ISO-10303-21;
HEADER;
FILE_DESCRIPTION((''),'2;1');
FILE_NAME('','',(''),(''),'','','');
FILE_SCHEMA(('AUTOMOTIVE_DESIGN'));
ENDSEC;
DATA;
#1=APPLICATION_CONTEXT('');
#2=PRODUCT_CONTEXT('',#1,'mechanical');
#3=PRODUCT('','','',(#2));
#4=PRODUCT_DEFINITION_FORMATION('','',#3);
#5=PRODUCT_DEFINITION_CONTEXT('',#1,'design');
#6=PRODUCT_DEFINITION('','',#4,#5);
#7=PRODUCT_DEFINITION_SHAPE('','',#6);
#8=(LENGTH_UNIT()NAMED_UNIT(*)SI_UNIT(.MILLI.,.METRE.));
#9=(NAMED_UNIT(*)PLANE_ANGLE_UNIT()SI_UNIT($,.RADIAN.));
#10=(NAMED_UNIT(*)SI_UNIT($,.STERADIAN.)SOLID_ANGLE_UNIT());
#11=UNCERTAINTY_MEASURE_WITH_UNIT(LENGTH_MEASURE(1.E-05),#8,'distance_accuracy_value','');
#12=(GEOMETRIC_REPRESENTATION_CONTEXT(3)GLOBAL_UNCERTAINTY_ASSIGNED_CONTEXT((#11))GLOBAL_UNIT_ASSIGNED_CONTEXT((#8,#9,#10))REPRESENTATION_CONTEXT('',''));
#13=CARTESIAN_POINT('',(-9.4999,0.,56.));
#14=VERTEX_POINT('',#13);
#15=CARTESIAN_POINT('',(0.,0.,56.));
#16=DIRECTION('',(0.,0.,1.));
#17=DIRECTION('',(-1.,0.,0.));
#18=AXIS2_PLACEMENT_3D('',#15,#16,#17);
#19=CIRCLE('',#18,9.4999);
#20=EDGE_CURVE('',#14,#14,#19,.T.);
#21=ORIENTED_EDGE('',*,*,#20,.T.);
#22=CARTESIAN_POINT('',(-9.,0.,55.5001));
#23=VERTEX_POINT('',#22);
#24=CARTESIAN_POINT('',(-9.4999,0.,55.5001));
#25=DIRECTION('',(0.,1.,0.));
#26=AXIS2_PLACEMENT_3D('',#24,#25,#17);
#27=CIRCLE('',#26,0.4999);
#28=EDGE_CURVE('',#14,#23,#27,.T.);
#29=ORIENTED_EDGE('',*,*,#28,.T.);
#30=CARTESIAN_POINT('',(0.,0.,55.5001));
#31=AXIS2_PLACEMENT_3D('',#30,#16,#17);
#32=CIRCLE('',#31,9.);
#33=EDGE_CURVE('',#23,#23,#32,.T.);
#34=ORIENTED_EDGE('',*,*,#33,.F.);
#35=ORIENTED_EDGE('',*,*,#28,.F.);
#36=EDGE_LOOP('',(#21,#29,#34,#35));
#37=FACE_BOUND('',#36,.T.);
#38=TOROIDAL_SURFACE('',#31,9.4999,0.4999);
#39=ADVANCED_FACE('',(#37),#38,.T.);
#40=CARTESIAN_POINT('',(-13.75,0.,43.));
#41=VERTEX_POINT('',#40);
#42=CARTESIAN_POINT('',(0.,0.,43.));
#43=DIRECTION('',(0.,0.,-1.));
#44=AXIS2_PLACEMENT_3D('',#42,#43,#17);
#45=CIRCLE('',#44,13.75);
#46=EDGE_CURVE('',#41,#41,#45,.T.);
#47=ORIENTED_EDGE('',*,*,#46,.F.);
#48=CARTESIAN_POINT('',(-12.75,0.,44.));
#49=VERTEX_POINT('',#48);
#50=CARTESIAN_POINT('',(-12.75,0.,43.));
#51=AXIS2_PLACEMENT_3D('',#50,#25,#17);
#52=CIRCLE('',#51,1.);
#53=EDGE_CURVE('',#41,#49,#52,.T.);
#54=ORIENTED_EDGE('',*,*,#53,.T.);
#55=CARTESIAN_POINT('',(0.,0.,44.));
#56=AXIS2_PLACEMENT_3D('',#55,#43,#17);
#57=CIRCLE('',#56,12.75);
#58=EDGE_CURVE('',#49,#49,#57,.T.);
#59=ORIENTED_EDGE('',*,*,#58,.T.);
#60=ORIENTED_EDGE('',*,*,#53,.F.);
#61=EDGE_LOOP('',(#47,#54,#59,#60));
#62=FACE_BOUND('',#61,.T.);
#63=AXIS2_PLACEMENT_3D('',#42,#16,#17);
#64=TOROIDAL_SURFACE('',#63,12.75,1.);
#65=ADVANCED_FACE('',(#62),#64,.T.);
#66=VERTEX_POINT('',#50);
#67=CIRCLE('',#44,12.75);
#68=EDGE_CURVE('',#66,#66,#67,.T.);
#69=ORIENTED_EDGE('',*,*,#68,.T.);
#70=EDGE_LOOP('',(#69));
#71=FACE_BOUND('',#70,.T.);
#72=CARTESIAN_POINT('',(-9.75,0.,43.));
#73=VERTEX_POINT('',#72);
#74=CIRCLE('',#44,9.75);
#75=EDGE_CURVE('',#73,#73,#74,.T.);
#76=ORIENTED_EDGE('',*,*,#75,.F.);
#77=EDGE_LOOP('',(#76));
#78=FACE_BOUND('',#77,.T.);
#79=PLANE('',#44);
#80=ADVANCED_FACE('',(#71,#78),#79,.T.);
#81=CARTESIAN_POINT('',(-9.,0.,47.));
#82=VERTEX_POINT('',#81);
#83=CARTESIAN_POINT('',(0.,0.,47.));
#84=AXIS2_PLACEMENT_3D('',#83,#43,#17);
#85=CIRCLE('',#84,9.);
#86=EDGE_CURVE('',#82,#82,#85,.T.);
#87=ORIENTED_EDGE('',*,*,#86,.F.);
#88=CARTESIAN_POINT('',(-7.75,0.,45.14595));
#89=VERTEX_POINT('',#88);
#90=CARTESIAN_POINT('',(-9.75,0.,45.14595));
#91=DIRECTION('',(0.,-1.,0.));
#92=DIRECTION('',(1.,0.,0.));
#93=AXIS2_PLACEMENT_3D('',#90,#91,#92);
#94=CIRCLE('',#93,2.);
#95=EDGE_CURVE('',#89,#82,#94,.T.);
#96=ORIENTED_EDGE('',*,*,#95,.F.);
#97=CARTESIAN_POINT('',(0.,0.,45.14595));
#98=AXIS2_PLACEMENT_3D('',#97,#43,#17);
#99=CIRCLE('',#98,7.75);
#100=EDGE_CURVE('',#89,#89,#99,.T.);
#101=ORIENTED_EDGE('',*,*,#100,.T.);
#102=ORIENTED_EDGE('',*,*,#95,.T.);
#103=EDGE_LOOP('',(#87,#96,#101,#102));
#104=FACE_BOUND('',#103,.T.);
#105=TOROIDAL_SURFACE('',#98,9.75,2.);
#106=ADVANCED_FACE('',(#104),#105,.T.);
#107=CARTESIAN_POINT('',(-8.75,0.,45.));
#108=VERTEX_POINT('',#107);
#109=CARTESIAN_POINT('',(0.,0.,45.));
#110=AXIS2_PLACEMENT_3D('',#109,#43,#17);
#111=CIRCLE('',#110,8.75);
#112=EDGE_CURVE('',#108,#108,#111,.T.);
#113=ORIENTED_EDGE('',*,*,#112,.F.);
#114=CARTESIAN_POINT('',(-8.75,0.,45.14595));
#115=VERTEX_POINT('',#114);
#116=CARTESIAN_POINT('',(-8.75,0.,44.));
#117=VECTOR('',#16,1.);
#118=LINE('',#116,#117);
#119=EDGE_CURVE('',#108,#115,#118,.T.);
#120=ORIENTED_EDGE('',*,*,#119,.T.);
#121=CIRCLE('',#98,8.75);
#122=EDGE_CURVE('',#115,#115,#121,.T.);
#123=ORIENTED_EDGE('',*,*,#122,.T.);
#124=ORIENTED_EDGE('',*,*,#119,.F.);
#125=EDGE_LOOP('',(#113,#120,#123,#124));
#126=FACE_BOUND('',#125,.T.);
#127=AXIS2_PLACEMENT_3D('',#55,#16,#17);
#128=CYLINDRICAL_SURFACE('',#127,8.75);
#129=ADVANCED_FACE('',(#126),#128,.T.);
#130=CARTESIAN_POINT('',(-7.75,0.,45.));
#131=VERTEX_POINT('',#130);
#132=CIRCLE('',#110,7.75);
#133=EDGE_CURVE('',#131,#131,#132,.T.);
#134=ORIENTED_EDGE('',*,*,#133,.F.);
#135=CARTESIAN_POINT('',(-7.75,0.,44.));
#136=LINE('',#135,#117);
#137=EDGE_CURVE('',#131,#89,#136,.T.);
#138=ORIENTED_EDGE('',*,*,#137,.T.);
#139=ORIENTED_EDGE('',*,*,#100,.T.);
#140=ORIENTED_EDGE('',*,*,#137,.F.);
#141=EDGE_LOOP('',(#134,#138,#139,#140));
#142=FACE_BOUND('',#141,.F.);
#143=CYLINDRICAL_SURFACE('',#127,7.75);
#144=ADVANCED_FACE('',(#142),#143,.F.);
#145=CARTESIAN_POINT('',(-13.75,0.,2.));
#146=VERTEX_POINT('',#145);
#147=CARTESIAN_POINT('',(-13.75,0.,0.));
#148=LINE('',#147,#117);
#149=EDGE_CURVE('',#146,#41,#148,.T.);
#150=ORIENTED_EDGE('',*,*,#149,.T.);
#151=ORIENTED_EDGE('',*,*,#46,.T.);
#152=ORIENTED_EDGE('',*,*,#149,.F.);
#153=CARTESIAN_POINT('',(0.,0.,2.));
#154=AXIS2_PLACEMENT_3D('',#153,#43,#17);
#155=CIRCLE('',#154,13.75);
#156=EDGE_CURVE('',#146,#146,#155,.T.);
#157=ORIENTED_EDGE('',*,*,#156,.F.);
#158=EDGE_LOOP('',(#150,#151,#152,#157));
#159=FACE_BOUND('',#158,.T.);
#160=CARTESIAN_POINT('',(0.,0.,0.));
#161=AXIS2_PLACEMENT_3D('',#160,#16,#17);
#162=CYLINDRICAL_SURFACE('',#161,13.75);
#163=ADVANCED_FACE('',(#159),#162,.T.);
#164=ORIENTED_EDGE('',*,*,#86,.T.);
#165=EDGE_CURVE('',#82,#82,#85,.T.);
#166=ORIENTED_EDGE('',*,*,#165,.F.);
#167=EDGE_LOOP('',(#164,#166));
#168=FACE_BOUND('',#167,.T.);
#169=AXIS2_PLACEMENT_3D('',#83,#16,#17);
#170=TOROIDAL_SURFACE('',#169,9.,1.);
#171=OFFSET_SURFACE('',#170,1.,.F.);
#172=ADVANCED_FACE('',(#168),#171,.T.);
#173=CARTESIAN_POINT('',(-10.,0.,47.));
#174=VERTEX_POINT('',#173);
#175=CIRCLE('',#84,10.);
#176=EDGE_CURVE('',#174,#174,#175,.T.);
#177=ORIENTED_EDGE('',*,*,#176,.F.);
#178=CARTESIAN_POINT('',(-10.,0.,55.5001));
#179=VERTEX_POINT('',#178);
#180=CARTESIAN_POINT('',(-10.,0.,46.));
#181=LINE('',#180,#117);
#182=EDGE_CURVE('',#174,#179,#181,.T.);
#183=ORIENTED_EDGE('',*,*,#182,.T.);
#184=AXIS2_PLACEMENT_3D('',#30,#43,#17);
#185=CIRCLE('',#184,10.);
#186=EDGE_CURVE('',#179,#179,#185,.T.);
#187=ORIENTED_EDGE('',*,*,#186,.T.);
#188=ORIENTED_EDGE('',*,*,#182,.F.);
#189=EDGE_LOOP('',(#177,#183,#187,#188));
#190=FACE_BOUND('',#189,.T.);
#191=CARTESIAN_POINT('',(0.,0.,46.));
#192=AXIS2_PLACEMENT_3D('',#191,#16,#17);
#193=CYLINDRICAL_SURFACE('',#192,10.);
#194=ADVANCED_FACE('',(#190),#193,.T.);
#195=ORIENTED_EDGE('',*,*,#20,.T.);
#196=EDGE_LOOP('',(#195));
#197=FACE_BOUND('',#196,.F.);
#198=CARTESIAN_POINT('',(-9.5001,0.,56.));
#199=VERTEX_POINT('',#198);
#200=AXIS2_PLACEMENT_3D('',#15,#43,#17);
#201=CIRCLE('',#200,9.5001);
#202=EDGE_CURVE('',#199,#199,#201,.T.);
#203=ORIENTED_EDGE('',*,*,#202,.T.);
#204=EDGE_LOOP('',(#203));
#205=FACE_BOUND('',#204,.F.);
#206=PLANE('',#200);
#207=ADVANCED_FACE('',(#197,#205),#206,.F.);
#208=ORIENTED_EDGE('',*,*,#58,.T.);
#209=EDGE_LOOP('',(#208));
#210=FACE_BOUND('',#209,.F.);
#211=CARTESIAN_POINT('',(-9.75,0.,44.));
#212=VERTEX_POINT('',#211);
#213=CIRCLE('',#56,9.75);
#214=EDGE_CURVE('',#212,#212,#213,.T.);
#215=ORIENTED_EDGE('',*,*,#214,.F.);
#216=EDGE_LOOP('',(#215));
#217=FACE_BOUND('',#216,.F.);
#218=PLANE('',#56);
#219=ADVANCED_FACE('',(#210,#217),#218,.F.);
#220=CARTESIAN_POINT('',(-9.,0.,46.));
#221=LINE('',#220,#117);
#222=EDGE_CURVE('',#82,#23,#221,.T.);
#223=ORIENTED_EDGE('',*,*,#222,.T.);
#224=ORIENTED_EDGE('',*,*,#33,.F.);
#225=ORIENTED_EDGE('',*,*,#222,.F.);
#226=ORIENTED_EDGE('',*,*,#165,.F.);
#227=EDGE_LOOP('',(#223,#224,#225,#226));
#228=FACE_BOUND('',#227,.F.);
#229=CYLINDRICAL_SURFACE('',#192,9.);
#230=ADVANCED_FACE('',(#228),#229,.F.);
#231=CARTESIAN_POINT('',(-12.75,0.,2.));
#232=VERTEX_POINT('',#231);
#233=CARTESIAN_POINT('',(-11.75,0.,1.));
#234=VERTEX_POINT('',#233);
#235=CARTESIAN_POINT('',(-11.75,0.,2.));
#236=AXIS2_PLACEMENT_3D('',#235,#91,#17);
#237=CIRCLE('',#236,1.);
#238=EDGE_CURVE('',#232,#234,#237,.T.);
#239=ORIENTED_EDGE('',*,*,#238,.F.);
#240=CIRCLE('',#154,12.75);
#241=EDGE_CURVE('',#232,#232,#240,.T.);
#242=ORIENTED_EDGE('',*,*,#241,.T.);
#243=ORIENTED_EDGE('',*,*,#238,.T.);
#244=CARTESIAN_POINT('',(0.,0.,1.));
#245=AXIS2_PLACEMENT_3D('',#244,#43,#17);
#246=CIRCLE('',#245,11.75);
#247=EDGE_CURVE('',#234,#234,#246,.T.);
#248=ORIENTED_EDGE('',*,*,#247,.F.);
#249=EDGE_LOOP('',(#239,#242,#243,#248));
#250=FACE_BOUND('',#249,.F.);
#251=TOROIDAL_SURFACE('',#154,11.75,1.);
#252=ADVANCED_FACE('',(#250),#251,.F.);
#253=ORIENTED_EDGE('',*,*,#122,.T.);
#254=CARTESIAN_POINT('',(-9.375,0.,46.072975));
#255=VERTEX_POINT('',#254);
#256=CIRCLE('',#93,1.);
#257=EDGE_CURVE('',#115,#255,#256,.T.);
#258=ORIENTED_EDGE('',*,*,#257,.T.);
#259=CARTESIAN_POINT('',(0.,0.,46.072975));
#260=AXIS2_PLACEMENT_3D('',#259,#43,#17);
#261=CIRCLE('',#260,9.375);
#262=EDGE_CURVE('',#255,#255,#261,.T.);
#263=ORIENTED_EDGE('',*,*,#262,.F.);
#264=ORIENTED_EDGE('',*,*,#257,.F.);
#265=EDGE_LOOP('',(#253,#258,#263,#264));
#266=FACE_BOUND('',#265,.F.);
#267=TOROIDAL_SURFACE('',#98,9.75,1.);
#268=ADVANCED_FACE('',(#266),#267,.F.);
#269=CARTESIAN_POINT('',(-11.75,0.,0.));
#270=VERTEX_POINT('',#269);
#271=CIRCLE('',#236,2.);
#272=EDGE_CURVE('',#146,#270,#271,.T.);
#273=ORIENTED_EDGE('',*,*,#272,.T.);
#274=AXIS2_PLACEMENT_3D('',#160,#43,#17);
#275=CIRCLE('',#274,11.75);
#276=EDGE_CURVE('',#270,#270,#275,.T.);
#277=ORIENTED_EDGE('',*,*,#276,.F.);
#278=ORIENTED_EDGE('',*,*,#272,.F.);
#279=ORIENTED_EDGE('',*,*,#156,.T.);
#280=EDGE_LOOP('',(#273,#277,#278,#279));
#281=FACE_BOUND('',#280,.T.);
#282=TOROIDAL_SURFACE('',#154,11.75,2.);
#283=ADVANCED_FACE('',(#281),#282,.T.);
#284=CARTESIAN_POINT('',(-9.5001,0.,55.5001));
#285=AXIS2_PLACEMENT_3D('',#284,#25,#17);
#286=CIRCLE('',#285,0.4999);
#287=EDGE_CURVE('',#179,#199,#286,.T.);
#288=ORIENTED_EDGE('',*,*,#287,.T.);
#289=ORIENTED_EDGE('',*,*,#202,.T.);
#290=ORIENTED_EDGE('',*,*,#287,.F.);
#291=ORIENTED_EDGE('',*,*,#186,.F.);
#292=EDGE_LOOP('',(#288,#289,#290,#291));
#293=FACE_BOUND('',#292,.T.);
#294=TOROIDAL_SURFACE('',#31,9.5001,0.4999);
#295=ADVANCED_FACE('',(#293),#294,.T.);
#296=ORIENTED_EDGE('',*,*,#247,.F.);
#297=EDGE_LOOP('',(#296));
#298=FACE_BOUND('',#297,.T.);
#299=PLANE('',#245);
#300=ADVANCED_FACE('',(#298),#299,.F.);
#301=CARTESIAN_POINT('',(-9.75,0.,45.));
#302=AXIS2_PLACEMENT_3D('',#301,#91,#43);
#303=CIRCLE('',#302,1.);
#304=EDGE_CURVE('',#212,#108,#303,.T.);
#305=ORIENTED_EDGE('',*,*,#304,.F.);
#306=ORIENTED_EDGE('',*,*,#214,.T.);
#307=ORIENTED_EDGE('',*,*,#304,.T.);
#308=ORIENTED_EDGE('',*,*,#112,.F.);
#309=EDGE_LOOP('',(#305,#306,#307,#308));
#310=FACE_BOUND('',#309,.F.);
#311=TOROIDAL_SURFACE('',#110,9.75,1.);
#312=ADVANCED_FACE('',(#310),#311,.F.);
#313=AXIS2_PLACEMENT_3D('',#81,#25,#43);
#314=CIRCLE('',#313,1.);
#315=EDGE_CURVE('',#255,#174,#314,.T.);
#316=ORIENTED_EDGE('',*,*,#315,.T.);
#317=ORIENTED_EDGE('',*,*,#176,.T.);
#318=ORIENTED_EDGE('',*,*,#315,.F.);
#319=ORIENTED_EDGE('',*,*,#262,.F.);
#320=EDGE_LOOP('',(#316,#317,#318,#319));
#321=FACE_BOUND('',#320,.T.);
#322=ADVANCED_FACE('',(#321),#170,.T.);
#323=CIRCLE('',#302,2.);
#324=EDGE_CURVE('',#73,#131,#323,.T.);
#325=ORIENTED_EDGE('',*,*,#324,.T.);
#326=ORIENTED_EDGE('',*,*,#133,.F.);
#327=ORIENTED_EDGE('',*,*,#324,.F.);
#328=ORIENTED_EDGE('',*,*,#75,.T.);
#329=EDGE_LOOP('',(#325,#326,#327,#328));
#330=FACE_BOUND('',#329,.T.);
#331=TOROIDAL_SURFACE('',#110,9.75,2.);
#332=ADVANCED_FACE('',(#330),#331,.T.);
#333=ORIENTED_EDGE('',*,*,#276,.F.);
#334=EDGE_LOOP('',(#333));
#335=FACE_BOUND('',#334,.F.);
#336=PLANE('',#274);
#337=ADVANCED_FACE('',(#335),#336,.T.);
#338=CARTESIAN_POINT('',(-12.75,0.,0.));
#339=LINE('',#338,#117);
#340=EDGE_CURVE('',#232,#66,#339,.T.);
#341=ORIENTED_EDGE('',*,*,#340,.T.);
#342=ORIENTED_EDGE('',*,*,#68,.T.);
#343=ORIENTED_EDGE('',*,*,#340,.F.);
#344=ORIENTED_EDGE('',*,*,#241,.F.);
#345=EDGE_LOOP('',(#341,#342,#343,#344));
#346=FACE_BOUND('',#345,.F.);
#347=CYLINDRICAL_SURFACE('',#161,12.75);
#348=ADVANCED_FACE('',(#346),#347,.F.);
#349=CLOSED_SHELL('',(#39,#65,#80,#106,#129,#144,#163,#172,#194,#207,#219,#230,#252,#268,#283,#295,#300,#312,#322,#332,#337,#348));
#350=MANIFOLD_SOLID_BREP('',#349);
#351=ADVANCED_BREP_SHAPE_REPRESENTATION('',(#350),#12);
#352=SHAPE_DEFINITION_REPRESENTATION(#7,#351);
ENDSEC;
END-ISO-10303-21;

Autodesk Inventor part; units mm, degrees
ref_plane "YZ Plane" through (0, 0, 0) normal (1, 0, 0) x (0, 1, 0)
ref_plane "XZ Plane" through (0, 0, 0) normal (0, 1, 0) x (-1, 0, 0)
ref_plane "XY Plane" through (0, 0, 0) normal (0, 0, 1) x (1, 0, 0)
sketch "Skizze1" plane through (0, 0, 0) normal (0, 1, 0) x (-1, 0, 0)
  line L0 (0, 0) -> (13.75, 0)
  line L1 (13.75, 0) -> (13.75, 44)
  line L2 (13.75, 44) -> (8.75, 44)
  line L3 (8.75, 44) -> (8.75, 46)
  line L4 (8.75, 46) -> (10, 46)
  line L5 (10, 46) -> (10, 56)
  line L6 (10, 56) -> (0, 56)
  line L7 (0, 56) -> (0, 0)
  dimension "d0" = 13.75
  dimension "d2" = 2
  dimension "d4" = 5
  dimension "d6" = 56
  dimension "d7" = 10
  dimension "d14" = 44
revolve "Umdrehung1" add sketch "Skizze1" angle 360 about axis through (0, 0, 56) along (0, 0, -1)
fillet "Rundung1" radius 2 1 edges at (13.75, 0, 0)
fillet "Rundung2" radius 1 4 edges at (13.75, 0, 44) (8.75, 0, 44) (10, 0, 46) (8.75, 0, 46)
shell "Wandung1" thickness 1 removed faces 1 at (1.182, 3.1167, 56)
fillet "Rundung4" radius 0.5 2 edges at (9, 0, 56) (10, 0, 56)
properties part number "Glas klein" material "Glass"
